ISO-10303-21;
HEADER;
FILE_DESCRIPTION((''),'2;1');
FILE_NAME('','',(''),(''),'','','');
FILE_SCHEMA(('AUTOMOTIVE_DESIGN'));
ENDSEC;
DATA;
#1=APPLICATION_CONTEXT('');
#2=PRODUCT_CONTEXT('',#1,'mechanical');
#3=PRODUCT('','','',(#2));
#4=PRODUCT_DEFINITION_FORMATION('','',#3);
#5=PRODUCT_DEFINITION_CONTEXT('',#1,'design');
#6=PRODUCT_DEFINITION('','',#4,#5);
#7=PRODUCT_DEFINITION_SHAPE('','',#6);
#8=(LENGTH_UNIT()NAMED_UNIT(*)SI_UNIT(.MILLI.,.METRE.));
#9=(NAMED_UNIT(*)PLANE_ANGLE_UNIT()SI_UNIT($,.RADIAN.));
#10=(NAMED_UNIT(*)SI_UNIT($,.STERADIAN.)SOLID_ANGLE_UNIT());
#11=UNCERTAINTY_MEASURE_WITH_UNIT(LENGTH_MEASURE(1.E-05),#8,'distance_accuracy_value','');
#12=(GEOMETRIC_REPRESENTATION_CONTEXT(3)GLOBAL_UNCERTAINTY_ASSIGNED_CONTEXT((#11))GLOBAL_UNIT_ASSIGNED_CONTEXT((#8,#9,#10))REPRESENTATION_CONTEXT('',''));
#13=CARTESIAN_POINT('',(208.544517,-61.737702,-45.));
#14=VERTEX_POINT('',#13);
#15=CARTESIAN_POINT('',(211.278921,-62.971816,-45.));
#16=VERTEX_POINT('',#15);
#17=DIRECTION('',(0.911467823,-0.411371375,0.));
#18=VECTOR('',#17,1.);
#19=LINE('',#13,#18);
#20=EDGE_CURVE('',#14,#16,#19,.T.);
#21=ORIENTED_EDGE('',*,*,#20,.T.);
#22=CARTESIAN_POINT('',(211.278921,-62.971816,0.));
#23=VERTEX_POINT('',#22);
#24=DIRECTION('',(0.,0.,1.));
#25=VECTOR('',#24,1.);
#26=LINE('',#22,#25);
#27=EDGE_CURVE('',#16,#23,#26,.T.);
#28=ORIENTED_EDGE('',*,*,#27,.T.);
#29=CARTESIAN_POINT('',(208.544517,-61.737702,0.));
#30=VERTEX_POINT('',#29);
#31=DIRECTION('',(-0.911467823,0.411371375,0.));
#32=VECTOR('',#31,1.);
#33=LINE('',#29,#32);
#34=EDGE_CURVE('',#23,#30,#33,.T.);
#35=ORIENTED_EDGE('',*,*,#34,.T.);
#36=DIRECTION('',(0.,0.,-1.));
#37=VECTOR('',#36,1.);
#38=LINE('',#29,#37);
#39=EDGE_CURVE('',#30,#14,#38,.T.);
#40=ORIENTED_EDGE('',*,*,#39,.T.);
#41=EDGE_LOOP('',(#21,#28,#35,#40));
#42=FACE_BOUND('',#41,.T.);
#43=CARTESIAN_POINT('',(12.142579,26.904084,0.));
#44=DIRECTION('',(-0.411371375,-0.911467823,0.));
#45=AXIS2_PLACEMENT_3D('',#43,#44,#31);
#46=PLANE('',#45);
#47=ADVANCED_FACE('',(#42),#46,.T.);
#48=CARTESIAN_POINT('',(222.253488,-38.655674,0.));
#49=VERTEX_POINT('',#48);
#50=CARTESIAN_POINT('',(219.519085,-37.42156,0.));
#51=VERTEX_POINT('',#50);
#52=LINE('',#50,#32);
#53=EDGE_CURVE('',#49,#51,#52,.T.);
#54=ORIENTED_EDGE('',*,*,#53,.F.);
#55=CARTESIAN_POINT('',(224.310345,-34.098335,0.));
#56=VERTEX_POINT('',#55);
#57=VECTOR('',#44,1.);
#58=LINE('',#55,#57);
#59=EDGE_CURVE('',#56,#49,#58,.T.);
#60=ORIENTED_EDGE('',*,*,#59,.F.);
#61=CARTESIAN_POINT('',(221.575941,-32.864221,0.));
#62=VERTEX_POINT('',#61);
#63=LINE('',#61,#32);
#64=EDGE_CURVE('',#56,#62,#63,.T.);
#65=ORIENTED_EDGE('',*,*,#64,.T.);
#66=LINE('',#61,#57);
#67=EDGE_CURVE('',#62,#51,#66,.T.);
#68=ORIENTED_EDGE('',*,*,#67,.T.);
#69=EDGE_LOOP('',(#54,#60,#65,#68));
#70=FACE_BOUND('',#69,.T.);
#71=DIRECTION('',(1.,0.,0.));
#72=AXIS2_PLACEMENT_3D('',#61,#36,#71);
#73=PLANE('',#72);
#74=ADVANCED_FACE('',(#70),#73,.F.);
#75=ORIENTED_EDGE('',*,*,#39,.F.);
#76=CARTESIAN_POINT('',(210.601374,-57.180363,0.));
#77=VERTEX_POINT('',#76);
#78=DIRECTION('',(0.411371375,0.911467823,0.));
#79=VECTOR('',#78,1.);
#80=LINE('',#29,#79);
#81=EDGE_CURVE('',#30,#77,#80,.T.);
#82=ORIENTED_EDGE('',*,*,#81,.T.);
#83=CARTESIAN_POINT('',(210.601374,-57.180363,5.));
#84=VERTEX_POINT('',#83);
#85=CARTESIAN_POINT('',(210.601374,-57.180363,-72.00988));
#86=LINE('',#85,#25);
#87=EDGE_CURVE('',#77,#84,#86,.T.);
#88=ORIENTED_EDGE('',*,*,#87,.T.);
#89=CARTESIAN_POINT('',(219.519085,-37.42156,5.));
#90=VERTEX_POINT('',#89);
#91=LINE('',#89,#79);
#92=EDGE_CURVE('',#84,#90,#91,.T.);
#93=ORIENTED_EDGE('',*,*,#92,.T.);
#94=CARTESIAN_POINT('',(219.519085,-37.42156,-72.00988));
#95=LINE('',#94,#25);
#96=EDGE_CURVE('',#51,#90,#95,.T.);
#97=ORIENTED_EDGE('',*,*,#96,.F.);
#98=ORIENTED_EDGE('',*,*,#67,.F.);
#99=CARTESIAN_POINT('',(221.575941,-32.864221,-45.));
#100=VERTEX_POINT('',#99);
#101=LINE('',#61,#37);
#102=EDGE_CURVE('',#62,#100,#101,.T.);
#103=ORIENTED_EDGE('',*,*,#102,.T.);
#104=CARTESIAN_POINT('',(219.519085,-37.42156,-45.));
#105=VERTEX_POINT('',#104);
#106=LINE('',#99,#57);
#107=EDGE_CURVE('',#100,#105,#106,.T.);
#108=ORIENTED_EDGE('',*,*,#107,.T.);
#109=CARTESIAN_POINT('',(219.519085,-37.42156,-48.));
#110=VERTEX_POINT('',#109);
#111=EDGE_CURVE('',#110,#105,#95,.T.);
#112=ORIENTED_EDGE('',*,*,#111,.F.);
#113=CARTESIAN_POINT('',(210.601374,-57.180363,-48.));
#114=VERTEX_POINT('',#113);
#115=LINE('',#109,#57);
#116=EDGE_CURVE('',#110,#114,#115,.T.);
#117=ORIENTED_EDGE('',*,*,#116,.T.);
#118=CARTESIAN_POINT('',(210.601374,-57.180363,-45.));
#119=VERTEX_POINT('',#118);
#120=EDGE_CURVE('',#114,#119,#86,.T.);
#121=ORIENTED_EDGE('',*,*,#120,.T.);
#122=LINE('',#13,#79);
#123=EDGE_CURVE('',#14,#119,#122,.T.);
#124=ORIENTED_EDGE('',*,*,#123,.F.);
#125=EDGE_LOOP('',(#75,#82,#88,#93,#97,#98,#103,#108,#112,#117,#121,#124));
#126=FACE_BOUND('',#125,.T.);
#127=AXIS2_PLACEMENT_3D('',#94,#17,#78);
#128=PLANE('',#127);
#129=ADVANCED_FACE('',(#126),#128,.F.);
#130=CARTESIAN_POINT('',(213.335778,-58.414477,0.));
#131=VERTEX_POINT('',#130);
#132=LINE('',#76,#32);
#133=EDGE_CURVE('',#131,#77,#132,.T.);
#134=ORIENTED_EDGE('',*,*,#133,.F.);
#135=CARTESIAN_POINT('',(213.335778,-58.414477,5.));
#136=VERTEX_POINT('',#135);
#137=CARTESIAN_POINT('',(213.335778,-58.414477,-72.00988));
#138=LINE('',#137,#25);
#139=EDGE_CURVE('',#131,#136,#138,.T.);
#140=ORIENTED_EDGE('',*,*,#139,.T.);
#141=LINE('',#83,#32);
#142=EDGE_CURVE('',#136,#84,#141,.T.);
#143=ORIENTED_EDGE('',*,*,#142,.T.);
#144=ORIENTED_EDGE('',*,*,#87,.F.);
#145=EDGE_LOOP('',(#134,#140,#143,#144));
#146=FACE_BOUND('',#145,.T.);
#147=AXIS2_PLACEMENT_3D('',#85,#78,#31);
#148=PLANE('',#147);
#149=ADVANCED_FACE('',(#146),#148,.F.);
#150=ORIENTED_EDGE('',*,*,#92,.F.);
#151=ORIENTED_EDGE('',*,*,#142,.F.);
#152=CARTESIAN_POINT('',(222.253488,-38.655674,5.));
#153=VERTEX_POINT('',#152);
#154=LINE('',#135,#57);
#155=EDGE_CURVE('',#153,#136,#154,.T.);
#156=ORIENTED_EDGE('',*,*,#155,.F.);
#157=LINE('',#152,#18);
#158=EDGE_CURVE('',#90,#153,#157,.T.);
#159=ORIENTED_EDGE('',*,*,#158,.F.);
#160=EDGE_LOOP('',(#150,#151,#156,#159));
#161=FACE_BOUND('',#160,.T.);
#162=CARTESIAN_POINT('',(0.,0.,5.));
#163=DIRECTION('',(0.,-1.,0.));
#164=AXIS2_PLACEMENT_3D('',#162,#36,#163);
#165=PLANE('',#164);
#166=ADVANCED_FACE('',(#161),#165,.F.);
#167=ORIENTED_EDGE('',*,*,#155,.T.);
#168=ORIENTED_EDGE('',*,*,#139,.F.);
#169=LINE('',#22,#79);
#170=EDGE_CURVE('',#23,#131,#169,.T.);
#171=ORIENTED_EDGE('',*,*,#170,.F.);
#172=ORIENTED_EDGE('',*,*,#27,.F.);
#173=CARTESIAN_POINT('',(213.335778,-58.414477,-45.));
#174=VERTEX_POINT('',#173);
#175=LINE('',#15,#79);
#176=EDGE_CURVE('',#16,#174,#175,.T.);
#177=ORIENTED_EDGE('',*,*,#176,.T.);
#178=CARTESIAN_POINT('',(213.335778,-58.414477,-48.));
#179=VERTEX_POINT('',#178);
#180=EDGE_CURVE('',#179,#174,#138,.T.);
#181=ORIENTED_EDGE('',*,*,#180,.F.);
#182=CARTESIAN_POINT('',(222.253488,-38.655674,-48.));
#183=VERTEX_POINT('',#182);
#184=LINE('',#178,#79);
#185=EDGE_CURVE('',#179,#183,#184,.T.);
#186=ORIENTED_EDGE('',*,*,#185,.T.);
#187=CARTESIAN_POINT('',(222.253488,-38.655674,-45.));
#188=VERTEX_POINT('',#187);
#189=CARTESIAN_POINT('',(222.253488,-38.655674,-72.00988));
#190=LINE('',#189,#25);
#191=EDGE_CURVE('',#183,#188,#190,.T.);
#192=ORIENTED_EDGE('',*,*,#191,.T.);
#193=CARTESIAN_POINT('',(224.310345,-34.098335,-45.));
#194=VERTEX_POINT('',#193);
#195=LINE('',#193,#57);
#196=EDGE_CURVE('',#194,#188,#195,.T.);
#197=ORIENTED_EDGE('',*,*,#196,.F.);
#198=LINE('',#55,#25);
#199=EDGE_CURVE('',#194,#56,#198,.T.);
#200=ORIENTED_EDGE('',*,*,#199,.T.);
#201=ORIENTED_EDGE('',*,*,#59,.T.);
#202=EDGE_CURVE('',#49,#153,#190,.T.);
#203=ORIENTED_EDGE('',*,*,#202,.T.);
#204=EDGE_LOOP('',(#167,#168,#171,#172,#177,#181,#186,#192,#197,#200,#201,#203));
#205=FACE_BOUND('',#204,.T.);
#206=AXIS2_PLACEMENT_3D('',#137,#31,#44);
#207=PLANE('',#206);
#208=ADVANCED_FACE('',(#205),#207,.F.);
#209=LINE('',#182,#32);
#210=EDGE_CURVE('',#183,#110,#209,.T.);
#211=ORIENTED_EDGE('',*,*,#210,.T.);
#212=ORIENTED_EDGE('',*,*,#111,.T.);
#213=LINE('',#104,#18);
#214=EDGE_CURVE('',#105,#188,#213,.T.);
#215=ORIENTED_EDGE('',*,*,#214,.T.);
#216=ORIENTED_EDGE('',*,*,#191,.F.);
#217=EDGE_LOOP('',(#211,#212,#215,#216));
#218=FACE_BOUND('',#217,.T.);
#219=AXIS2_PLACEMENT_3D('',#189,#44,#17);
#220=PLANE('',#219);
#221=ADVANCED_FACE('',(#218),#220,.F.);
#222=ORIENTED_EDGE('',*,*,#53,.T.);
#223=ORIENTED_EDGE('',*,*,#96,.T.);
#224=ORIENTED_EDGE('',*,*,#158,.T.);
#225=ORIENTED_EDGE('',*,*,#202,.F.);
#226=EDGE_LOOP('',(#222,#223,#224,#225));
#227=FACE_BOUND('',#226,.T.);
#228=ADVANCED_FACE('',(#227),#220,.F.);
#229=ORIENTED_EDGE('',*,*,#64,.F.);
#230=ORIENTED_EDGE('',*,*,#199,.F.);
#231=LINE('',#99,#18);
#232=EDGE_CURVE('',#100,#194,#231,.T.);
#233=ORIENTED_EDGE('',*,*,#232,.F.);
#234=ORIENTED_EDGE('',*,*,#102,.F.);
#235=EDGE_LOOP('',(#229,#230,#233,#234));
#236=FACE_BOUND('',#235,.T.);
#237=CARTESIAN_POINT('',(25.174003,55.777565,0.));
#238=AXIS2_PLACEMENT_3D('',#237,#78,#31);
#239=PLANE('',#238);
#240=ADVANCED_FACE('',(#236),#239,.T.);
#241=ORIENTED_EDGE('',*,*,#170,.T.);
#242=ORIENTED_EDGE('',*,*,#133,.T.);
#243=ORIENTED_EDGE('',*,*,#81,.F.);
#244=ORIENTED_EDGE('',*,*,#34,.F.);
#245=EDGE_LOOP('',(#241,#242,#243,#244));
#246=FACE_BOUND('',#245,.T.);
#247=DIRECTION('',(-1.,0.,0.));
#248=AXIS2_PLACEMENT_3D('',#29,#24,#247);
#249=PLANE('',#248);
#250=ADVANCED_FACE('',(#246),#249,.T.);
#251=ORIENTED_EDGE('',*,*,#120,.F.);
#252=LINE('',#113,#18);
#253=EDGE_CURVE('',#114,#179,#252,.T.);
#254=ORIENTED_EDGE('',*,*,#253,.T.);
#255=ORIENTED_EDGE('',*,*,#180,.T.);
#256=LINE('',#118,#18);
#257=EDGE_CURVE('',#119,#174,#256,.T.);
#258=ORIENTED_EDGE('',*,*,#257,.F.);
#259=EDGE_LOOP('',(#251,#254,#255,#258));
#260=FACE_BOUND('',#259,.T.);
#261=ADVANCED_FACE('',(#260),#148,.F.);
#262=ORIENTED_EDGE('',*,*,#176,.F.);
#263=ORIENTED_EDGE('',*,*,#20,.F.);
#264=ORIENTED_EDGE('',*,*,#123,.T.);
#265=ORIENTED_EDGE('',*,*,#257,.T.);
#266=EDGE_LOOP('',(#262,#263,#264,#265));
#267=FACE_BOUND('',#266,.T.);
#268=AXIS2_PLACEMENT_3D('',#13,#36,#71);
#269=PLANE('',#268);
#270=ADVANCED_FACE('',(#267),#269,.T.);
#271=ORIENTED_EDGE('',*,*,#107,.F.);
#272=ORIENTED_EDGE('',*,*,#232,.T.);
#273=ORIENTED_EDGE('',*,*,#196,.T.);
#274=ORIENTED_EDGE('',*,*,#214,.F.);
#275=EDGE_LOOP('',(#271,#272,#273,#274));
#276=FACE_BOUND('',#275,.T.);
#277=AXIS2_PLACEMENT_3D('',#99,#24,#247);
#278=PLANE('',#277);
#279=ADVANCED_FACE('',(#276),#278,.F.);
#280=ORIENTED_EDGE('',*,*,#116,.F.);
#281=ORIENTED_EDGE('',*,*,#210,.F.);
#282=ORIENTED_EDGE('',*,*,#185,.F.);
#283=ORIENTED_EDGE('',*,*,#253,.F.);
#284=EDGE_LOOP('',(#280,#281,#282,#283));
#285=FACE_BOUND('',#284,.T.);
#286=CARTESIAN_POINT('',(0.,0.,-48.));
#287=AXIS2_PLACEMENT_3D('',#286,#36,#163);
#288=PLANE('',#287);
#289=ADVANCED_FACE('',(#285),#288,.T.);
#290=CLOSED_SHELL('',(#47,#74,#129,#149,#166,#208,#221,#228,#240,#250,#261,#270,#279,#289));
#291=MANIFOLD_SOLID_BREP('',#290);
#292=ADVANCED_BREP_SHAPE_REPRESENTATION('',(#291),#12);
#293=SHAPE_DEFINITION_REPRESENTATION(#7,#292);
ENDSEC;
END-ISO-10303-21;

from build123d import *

# Parameters (mm, degrees)
ESTRUSIONE_ESTRUSIONE1_DEPTH      = 48
ESTRUSIONE_ESTRUSIONE1_DEPTH_BACK = 5
SCHIZZO2_W                        = 3
SCHIZZO2_H                        = 45
ESTRUSIONE_ESTRUSIONE2_DEPTH      = 5
CORPO_SPOSTA_COPIA1_START         = 29.517316332
CORPO_SPOSTA_COPIA1_OUTLINE_W     = 3
CORPO_SPOSTA_COPIA1_OUTLINE_H     = 43
CORPO_SPOSTA_COPIA1_DEPTH         = 31.678003798
CORPO_SPOSTA_COPIA1_2_OUTLINE_W   = 3
CORPO_SPOSTA_COPIA1_2_OUTLINE_H   = 5
CORPO_SPOSTA_COPIA1_2_DEPTH       = 5
CORPO_SPOSTA_COPIA1_START_2       = 56.19532013
CORPO_SPOSTA_COPIA1_3_OUTLINE_W   = 3
CORPO_SPOSTA_COPIA1_3_OUTLINE_H   = 5
CORPO_SPOSTA_COPIA1_3_DEPTH       = 5
CORPO_SPOSTA_COPIA1_4_OUTLINE_W   = 3
CORPO_SPOSTA_COPIA1_4_OUTLINE_H   = 45
CORPO_SPOSTA_COPIA1_4_DEPTH       = 31.678003798
CORPO_SPOSTA_COPIA1_START_3       = 34.517316332
CORPO_SPOSTA_COPIA1_5_OUTLINE_W   = 3
CORPO_SPOSTA_COPIA1_5_OUTLINE_H   = 3
CORPO_SPOSTA_COPIA1_5_DEPTH       = 21.678003798


# Read off the part's stored shape, not the designer's step: Corpo-Sposta/copia1
with BuildPart() as part:
    # Schizzo1 → Estrusione-Estrusione1 (new, two sides: drawn at the far end of the back side and taken through both)
    with BuildSketch(Plane.XY.offset(-ESTRUSIONE_ESTRUSIONE1_DEPTH_BACK)):
        Polygon((219.519084515, -37.421559693), (210.601374282, -57.180362615), (213.33577775, -58.414476741), (222.253487983, -38.655673819), align=None)
    extrude(amount=ESTRUSIONE_ESTRUSIONE1_DEPTH + ESTRUSIONE_ESTRUSIONE1_DEPTH_BACK)

    # Schizzo2 → Estrusione-Estrusione2 (add)
    with BuildSketch(Plane(origin=(23.117146118, 51.220226082, 0), x_dir=(0.9114678226482943, -0.41137137513052313, 0), z_dir=(0.41137137513052313, 0.9114678226482943, 0))):
        with Locations((216.978740463, -22.5)):
            Rectangle(SCHIZZO2_W, SCHIZZO2_H)
    estrusione_estrusione2 = extrude(amount=ESTRUSIONE_ESTRUSIONE2_DEPTH)

    # Specchia1: Estrusione-Estrusione2 across plane
    add(estrusione_estrusione2.mirror(Plane(origin=(18.658291002, 41.340824621, 0), x_dir=(0, 0, 1), z_dir=(0.41137137513052446, 0.9114678226482937, 0))))

    # Corpo-Sposta/copia1 outline → Corpo-Sposta/copia1 (cut)
    with BuildSketch(Plane(origin=(0, 0, 0), x_dir=(0.9114678226482965, -0.4113713751305183, 0), z_dir=(0.41137137513051825, 0.9114678226482965, 0)).offset(CORPO_SPOSTA_COPIA1_START)):
        with Locations((216.978740463, -26.5)):
            Rectangle(CORPO_SPOSTA_COPIA1_OUTLINE_W, CORPO_SPOSTA_COPIA1_OUTLINE_H)
    extrude(amount=CORPO_SPOSTA_COPIA1_DEPTH, mode=Mode.SUBTRACT)

    # Corpo-Sposta_copia1 2 outline → Corpo-Sposta_copia1 2 (cut)
    with BuildSketch(Plane(origin=(0, 0, 0), x_dir=(0.9114678226482965, -0.4113713751305183, 0), z_dir=(0.41137137513051825, 0.9114678226482965, 0)).offset(CORPO_SPOSTA_COPIA1_START)):
        with Locations((216.978740463, -2.5)):
            Rectangle(CORPO_SPOSTA_COPIA1_2_OUTLINE_W, CORPO_SPOSTA_COPIA1_2_OUTLINE_H)
    extrude(amount=CORPO_SPOSTA_COPIA1_2_DEPTH, mode=Mode.SUBTRACT)

    # Corpo-Sposta_copia1 3 outline → Corpo-Sposta_copia1 3 (cut)
    with BuildSketch(Plane(origin=(0, 0, 0), x_dir=(0.9114678226482965, -0.4113713751305183, 0), z_dir=(0.41137137513051825, 0.9114678226482965, 0)).offset(CORPO_SPOSTA_COPIA1_START_2)):
        with Locations((216.978740463, -2.5)):
            Rectangle(CORPO_SPOSTA_COPIA1_3_OUTLINE_W, CORPO_SPOSTA_COPIA1_3_OUTLINE_H)
    extrude(amount=CORPO_SPOSTA_COPIA1_3_DEPTH, mode=Mode.SUBTRACT)

    # Corpo-Sposta_copia1 4 outline → Corpo-Sposta_copia1 4 (add)
    with BuildSketch(Plane(origin=(0, 0, 0), x_dir=(0.9114678226482965, -0.4113713751305183, 0), z_dir=(0.41137137513051825, 0.9114678226482965, 0)).offset(CORPO_SPOSTA_COPIA1_START)):
        with Locations((216.978740463, 22.5)):
            Rectangle(CORPO_SPOSTA_COPIA1_4_OUTLINE_W, CORPO_SPOSTA_COPIA1_4_OUTLINE_H)
    extrude(amount=CORPO_SPOSTA_COPIA1_4_DEPTH)

    # Corpo-Sposta_copia1 5 outline → Corpo-Sposta_copia1 5 (add)
    with BuildSketch(Plane(origin=(0, 0, 0), x_dir=(0.9114678226482965, -0.4113713751305183, 0), z_dir=(0.41137137513051825, 0.9114678226482965, 0)).offset(CORPO_SPOSTA_COPIA1_START_3)):
        with Locations((216.978740463, 46.5)):
            Rectangle(CORPO_SPOSTA_COPIA1_5_OUTLINE_W, CORPO_SPOSTA_COPIA1_5_OUTLINE_H)
    extrude(amount=CORPO_SPOSTA_COPIA1_5_DEPTH)


solid = part.part
